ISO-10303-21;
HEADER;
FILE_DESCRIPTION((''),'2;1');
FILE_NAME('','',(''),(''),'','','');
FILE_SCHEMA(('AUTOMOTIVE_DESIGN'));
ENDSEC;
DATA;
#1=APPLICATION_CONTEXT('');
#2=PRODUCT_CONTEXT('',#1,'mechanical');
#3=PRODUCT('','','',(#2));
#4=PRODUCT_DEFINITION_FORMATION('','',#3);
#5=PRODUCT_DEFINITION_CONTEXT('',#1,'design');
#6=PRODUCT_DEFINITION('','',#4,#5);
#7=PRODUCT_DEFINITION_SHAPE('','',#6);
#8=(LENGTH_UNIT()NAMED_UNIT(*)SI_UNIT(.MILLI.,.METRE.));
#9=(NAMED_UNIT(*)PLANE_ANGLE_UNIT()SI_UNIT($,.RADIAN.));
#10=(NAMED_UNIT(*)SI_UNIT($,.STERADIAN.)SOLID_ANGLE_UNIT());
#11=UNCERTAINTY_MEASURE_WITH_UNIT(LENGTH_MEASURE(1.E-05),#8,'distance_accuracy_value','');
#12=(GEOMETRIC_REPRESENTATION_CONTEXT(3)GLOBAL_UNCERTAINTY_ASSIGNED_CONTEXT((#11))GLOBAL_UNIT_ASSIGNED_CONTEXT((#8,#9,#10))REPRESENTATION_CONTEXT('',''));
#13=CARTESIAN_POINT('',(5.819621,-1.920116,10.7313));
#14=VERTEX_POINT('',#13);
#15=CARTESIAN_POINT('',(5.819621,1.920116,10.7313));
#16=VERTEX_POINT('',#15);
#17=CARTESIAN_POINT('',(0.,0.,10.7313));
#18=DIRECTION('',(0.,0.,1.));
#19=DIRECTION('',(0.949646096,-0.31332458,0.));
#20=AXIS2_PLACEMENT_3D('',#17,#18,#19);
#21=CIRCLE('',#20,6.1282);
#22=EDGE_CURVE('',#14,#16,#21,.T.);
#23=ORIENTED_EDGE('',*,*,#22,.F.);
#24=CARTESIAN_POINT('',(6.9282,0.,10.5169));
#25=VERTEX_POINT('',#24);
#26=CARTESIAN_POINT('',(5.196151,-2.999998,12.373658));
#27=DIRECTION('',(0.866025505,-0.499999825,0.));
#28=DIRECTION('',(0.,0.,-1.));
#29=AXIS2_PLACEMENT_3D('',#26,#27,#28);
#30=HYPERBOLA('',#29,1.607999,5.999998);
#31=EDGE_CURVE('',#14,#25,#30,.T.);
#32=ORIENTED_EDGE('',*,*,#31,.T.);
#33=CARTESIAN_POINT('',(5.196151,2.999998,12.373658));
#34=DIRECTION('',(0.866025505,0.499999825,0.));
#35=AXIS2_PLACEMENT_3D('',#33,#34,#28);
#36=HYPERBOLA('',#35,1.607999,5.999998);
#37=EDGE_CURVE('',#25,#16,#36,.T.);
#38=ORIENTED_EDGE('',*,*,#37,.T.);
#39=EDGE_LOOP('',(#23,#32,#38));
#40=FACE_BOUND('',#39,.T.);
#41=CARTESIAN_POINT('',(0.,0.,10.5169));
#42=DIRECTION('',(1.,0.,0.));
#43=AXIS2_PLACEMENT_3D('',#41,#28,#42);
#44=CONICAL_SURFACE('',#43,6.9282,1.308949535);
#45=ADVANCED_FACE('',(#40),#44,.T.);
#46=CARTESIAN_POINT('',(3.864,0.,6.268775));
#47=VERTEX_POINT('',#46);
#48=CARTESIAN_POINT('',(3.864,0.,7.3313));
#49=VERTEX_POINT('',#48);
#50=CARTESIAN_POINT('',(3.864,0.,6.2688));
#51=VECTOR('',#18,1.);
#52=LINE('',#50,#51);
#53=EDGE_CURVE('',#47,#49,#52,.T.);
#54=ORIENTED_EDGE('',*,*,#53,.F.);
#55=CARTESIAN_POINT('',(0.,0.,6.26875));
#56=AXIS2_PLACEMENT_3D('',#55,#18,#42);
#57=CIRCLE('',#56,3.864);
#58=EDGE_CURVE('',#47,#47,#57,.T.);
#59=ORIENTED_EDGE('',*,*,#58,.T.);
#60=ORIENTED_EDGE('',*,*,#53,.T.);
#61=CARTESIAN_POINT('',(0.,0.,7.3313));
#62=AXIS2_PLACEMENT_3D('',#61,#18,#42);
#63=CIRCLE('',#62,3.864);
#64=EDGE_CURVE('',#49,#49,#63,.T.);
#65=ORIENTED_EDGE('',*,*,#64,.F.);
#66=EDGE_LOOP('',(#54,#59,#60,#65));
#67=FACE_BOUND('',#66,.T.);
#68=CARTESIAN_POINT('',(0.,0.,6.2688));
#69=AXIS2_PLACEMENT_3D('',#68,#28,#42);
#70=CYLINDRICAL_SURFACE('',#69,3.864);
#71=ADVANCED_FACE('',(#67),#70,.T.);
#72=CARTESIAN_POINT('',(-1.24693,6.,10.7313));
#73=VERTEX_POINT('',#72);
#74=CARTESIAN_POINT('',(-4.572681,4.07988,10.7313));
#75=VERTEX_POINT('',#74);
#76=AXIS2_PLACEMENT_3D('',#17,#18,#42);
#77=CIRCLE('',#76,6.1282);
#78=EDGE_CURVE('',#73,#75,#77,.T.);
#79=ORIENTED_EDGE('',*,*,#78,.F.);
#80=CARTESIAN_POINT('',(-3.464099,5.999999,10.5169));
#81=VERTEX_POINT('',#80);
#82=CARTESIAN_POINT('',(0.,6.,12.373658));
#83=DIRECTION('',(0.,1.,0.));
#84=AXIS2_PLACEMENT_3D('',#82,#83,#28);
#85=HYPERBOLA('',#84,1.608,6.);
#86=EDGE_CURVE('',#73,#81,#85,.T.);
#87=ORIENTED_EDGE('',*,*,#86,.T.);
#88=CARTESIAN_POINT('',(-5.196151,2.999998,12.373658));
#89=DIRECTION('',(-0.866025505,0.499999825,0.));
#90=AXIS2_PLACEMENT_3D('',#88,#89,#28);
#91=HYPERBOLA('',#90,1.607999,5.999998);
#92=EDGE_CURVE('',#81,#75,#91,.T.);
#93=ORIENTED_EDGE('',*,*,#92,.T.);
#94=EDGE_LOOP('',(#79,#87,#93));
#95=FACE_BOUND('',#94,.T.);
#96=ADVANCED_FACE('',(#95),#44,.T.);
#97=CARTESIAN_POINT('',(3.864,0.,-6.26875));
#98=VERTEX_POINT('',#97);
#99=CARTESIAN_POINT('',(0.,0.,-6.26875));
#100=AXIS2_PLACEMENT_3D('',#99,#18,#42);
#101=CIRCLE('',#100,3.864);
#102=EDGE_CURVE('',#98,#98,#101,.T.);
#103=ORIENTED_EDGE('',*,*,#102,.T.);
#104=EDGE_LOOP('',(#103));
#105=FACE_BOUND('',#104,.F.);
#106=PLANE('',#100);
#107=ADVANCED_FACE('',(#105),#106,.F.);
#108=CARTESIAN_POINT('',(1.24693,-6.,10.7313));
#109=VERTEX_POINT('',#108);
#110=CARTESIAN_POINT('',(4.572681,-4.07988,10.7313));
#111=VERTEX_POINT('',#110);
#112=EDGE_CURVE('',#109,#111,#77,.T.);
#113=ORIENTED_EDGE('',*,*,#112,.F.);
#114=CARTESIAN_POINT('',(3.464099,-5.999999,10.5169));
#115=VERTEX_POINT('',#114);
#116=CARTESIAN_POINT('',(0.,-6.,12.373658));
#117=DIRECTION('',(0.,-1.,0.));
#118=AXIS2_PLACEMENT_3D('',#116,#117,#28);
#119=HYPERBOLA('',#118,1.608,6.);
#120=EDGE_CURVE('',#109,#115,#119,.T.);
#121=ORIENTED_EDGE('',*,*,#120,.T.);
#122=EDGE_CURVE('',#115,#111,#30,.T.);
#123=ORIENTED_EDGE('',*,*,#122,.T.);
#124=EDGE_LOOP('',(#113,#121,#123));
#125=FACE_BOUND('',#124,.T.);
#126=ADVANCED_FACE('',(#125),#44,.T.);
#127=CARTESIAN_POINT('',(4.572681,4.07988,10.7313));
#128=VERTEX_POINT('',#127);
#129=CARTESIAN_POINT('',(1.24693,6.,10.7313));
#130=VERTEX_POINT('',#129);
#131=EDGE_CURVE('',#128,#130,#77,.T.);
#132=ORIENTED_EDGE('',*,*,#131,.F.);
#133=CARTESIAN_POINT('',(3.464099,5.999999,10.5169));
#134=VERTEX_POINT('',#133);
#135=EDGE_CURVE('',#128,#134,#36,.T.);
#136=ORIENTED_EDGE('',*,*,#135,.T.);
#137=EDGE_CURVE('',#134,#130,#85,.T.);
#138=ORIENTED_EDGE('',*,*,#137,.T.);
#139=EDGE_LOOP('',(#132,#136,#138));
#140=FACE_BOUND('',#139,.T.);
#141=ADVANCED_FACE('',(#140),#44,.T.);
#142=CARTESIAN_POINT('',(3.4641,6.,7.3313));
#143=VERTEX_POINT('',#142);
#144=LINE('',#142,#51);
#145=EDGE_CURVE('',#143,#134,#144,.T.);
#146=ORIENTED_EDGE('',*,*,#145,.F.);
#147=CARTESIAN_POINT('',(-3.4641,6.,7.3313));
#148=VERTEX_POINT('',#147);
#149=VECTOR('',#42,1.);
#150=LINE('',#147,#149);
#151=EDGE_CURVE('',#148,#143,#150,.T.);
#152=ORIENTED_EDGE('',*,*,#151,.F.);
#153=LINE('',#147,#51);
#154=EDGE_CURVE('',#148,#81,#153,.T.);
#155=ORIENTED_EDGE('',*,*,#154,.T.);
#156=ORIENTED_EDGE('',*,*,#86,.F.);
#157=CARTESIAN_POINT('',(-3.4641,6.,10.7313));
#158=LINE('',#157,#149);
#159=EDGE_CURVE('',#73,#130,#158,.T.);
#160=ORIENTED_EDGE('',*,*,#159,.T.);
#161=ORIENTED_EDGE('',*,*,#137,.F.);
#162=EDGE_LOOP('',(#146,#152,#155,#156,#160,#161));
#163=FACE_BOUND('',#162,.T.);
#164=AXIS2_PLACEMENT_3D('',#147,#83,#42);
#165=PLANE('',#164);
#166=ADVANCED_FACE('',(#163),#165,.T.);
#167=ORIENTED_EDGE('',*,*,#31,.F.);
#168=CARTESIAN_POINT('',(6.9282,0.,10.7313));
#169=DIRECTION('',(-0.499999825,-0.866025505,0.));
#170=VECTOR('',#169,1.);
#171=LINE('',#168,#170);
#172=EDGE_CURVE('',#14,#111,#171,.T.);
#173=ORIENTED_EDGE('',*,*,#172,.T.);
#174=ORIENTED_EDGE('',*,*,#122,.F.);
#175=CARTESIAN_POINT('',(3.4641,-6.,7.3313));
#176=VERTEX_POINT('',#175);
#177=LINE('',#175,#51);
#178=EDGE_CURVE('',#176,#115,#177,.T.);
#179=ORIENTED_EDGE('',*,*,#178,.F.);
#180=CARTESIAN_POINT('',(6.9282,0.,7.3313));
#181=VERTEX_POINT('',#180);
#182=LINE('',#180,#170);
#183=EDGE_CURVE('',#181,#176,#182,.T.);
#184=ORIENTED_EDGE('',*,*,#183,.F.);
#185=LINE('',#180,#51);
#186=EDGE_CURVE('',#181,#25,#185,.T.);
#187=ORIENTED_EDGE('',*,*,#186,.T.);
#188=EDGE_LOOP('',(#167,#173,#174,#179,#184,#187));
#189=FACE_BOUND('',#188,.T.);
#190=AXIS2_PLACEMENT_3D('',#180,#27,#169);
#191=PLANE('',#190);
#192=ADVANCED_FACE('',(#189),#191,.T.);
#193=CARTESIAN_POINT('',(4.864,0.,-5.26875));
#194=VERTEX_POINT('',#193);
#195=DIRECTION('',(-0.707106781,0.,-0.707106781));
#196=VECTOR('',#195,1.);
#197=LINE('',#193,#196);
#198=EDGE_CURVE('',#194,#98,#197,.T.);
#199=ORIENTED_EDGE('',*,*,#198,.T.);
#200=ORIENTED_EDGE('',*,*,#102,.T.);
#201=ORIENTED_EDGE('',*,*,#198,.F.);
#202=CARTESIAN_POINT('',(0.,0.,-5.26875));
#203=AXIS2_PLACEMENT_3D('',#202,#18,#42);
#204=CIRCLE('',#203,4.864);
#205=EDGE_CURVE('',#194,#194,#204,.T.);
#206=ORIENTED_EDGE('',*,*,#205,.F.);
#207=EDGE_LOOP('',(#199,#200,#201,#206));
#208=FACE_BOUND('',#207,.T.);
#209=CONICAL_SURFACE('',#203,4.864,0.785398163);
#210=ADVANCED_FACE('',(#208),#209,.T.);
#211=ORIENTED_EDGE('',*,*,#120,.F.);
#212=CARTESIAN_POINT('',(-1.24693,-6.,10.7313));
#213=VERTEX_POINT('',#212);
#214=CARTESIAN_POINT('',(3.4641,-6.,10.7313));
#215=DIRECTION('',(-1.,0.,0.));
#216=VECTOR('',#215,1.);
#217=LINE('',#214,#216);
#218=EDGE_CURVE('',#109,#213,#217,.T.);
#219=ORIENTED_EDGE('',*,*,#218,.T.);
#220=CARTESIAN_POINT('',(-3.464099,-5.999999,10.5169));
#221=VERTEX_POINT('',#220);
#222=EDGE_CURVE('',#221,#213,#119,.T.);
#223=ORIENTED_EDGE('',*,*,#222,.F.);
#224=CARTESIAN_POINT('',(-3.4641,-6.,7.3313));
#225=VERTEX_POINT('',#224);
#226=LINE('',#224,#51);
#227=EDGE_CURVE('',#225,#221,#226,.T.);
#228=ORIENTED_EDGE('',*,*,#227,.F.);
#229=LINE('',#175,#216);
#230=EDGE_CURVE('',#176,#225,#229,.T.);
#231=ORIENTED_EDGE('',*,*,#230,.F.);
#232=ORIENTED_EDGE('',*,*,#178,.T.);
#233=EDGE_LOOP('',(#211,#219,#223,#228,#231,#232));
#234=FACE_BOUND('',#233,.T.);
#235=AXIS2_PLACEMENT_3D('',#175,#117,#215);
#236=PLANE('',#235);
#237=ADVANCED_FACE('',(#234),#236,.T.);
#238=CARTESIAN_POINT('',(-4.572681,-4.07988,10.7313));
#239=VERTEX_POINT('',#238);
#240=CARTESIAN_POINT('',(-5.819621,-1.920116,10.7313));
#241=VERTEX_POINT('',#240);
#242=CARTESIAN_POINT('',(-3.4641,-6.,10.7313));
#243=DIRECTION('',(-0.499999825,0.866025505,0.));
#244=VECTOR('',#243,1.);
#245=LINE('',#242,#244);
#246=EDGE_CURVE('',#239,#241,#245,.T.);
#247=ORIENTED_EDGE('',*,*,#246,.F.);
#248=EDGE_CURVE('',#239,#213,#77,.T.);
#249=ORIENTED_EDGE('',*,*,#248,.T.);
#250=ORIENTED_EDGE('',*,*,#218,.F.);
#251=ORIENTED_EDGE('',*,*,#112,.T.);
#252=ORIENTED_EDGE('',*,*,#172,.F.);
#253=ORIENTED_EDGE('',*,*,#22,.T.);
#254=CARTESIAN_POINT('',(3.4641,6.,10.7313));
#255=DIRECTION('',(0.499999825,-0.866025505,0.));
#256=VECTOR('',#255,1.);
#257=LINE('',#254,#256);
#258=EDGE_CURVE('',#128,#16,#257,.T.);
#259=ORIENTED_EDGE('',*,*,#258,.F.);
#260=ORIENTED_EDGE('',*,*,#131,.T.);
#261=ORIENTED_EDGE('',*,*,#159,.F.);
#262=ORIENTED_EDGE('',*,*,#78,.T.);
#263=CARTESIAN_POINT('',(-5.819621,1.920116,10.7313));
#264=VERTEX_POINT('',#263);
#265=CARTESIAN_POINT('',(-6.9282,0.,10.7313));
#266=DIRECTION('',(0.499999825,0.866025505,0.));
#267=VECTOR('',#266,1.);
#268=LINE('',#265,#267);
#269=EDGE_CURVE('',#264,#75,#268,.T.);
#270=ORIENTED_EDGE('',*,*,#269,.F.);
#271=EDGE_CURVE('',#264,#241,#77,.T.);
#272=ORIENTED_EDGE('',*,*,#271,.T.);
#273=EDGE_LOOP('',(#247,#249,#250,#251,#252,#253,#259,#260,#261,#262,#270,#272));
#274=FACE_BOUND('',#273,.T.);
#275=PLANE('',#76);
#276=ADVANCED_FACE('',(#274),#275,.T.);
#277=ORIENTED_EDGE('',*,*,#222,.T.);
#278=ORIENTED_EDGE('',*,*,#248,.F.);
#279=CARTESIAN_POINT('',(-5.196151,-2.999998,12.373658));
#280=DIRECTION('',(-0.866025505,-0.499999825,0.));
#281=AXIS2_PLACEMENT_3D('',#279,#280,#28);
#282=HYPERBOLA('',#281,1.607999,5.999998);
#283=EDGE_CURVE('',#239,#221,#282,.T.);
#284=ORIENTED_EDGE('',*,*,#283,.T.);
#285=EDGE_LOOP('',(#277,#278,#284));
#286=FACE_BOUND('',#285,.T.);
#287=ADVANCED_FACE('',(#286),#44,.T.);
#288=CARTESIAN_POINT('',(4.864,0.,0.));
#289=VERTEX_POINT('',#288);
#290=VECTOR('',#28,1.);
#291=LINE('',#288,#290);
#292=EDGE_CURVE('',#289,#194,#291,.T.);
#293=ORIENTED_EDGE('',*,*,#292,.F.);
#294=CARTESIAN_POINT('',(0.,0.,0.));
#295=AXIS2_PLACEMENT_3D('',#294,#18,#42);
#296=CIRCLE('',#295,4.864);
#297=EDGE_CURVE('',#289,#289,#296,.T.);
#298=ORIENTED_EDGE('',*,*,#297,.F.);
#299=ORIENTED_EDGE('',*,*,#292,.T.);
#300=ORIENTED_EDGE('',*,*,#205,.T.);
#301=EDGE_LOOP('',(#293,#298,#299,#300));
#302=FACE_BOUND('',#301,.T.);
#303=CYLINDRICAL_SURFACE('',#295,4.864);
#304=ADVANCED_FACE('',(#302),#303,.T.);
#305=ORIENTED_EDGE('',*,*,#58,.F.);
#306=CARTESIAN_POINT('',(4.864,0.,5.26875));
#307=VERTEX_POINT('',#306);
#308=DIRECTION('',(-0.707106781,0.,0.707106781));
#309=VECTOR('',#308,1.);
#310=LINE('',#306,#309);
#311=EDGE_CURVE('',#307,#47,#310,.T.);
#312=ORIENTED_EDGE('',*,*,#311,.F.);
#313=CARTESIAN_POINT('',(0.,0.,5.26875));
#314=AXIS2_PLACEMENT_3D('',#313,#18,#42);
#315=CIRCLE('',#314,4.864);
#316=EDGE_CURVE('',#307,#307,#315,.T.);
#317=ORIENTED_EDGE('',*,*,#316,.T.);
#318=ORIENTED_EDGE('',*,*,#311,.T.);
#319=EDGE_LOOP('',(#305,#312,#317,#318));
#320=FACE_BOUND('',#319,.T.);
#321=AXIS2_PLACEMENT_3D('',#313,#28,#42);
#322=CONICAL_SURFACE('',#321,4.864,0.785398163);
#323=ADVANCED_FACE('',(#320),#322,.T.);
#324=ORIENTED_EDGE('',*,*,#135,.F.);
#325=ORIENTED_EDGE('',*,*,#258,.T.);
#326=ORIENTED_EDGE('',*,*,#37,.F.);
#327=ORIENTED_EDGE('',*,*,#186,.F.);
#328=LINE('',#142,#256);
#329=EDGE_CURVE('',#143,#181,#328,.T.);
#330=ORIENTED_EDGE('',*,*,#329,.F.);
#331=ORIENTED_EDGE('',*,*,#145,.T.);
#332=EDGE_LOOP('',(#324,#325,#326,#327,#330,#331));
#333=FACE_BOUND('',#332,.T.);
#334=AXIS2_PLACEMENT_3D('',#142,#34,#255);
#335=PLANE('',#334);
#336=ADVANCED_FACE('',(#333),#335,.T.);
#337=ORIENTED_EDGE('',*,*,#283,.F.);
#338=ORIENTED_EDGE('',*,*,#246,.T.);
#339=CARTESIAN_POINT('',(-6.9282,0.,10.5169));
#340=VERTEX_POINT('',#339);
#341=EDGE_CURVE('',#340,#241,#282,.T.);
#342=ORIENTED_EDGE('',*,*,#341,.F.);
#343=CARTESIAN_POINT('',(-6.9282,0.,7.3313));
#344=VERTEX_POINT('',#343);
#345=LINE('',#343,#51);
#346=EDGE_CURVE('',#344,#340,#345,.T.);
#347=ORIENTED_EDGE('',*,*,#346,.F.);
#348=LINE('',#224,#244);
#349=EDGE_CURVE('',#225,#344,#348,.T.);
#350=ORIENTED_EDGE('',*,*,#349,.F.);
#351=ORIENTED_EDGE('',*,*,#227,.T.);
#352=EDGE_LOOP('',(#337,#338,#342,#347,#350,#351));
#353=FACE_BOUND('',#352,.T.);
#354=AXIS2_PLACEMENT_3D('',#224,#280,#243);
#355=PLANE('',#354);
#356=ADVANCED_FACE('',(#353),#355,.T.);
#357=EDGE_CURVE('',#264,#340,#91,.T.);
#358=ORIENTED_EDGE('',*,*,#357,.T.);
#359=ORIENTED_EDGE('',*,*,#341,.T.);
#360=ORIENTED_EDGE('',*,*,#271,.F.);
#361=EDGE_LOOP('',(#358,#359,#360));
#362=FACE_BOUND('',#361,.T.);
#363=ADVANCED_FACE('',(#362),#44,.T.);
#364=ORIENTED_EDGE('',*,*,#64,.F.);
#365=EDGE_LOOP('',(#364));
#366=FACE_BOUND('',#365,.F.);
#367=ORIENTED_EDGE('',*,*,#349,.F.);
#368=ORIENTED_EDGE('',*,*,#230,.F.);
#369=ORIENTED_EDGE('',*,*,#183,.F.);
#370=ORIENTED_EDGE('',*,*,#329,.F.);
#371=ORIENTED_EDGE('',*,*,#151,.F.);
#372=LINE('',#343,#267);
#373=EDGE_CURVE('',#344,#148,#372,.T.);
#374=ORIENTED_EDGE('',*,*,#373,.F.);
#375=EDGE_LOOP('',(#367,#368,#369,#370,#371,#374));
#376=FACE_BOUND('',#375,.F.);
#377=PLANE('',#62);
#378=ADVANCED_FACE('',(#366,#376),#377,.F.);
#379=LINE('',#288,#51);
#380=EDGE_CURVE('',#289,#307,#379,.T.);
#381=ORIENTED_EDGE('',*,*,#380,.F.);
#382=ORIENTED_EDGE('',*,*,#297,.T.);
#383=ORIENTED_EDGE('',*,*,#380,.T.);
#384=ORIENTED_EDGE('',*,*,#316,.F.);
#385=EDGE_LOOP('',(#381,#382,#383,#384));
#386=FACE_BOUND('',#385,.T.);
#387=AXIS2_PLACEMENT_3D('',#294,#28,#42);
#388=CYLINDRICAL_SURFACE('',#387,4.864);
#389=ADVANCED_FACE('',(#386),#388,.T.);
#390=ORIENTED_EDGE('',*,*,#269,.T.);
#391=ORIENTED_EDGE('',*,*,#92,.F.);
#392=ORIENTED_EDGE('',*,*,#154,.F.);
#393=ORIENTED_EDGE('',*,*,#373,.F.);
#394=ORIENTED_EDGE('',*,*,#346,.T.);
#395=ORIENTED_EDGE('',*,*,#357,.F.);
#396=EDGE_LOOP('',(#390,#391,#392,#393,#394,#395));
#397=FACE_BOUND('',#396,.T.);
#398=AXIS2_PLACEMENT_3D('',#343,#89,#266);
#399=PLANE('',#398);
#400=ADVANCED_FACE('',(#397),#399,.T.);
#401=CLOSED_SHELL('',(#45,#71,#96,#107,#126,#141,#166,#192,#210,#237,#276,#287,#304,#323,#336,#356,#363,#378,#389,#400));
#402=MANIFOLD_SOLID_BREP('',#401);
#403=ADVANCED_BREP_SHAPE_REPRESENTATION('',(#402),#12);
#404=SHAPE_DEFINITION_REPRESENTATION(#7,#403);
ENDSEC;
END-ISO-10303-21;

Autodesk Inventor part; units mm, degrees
ref_plane "YZ Plane" through (0, 0, 0) normal (1, 0, 0) x (0, 1, 0)
ref_plane "XZ Plane" through (0, 0, 0) normal (0, 1, 0) x (-1, 0, 0)
ref_plane "XY Plane" through (0, 0, 0) normal (0, 0, 1) x (1, 0, 0)
sketch "Szkic7" plane through (0, 0, 0) normal (0, 0, 1) x (1, 0, 0)
  circle A0 centre (0, 0) radius 4.864
  dimension "d35" = 9.728
extrude "Wyciągnięcie proste2" add sketch "Szkic7" along normal mid plane 12.5375
chamfer "Faza2" distance 1 angle 45 1 edges at (-4.864, 0, 6.2688)
sketch "Szkic9" plane through (0, 0, 6.2688) normal (0, 0, 1) x (1, 0, 0)
  circle A0 centre (0, 0) radius 3.864 projected
extrude "Wyciągnięcie proste3" add sketch "Szkic9" along normal blind 1.0625
sketch "Szkic10" plane through (0, 0, 7.3313) normal (0, 0, 1) x (1, 0, 0)
  line L0 (-3.4641, 6) -> (3.4641, 6)
  line L1 (3.4641, 6) -> (6.9282, 0)
  line L2 (6.9282, 0) -> (3.4641, -6)
  line L3 (3.4641, -6) -> (-3.4641, -6)
  line L4 (-3.4641, -6) -> (-6.9282, 0)
  line L5 (-6.9282, 0) -> (-3.4641, 6)
  line L6 (0, 8.4) -> (0, -8.4) construction
  line L7 (-9.6995, 0) -> (9.6995, 0) construction
  point P0 (0, 0)
  point P1 (0, 0)
  point P2 (0, 6)
  dimension "d44" = 12
extrude "Wyciągnięcie proste4" add sketch "Szkic10" along normal blind 3.4
sketch "Szkic12" plane through (0, 0, 0) normal (0, 1, 0) x (-1, 0, 0)
  line L0 (0, -2.1463) -> (0, 12.8775) construction
  line L1 (-3.4641, 7.3313) -> (-3.4641, 10.7313) construction
  line L2 (-6.9282, 10.7313) -> (-3.4641, 10.7313) construction
  line L3 (-6.9282, 7.3313) -> (-6.9282, 10.7313) projected
  line L4 (-6.9282, 10.5169) -> (-6.1282, 10.7313)
  line L5 (-6.9282, 10.7313) -> (-3.4641, 10.7313) projected
  line L6 (-6.9282, 7.3313) -> (-3.4641, 7.3313) projected
  point P0 (0, 0)
  dimension "d50" = 15
  dimension "d51" = 0.8
revolve "Obrót2" cut sketch "Szkic12" angle 360 about axis through (0, 0, -10) along (0, 0, 1)
thread "Gwint3" size "G9.728x0.907" designation "G 1/8" class "A" standard "ISO Pipe Threads" full length
chamfer "Faza3" distance 1 angle 45 1 edges at (-4.864, 0, -6.2688)
equation "\"d35\" = OD"
equation "\"d36\" = 0.7375 * L"
equation "\"d42\" = 0.0625 * L"
equation "\"d44\" = SW"
equation "\"d45\" = 0.2 * L"
equation "\"d51\" = 0.0666667 * SW"
equation "\"SzerokośćGięciaPodcięcia\" = Grubość"
equation "\"RozmiarPodcięciaNarożnika\" = 4 * Grubość"
equation "\"PromieńPrzejścia\" = PromieńGięcia"
equation "\"Rozmiar_promienia_Jacobiego\" = PromieńGięcia"
equation "\"Wielk_odstępu\" = Grubość"
equation "\"d2\" = PromieńGięcia"
equation "\"d23\" = PromieńGięcia"
equation "\"OD\" = 9.728"
equation "\"SW\" = 12"
equation "\"L\" = 17"
equation "\"Grubość\" = 1.5"
equation "\"PromieńGięcia\" = 3"
properties part number "Korek sześciokątny BSP 1/8'' L=17" material "304"
